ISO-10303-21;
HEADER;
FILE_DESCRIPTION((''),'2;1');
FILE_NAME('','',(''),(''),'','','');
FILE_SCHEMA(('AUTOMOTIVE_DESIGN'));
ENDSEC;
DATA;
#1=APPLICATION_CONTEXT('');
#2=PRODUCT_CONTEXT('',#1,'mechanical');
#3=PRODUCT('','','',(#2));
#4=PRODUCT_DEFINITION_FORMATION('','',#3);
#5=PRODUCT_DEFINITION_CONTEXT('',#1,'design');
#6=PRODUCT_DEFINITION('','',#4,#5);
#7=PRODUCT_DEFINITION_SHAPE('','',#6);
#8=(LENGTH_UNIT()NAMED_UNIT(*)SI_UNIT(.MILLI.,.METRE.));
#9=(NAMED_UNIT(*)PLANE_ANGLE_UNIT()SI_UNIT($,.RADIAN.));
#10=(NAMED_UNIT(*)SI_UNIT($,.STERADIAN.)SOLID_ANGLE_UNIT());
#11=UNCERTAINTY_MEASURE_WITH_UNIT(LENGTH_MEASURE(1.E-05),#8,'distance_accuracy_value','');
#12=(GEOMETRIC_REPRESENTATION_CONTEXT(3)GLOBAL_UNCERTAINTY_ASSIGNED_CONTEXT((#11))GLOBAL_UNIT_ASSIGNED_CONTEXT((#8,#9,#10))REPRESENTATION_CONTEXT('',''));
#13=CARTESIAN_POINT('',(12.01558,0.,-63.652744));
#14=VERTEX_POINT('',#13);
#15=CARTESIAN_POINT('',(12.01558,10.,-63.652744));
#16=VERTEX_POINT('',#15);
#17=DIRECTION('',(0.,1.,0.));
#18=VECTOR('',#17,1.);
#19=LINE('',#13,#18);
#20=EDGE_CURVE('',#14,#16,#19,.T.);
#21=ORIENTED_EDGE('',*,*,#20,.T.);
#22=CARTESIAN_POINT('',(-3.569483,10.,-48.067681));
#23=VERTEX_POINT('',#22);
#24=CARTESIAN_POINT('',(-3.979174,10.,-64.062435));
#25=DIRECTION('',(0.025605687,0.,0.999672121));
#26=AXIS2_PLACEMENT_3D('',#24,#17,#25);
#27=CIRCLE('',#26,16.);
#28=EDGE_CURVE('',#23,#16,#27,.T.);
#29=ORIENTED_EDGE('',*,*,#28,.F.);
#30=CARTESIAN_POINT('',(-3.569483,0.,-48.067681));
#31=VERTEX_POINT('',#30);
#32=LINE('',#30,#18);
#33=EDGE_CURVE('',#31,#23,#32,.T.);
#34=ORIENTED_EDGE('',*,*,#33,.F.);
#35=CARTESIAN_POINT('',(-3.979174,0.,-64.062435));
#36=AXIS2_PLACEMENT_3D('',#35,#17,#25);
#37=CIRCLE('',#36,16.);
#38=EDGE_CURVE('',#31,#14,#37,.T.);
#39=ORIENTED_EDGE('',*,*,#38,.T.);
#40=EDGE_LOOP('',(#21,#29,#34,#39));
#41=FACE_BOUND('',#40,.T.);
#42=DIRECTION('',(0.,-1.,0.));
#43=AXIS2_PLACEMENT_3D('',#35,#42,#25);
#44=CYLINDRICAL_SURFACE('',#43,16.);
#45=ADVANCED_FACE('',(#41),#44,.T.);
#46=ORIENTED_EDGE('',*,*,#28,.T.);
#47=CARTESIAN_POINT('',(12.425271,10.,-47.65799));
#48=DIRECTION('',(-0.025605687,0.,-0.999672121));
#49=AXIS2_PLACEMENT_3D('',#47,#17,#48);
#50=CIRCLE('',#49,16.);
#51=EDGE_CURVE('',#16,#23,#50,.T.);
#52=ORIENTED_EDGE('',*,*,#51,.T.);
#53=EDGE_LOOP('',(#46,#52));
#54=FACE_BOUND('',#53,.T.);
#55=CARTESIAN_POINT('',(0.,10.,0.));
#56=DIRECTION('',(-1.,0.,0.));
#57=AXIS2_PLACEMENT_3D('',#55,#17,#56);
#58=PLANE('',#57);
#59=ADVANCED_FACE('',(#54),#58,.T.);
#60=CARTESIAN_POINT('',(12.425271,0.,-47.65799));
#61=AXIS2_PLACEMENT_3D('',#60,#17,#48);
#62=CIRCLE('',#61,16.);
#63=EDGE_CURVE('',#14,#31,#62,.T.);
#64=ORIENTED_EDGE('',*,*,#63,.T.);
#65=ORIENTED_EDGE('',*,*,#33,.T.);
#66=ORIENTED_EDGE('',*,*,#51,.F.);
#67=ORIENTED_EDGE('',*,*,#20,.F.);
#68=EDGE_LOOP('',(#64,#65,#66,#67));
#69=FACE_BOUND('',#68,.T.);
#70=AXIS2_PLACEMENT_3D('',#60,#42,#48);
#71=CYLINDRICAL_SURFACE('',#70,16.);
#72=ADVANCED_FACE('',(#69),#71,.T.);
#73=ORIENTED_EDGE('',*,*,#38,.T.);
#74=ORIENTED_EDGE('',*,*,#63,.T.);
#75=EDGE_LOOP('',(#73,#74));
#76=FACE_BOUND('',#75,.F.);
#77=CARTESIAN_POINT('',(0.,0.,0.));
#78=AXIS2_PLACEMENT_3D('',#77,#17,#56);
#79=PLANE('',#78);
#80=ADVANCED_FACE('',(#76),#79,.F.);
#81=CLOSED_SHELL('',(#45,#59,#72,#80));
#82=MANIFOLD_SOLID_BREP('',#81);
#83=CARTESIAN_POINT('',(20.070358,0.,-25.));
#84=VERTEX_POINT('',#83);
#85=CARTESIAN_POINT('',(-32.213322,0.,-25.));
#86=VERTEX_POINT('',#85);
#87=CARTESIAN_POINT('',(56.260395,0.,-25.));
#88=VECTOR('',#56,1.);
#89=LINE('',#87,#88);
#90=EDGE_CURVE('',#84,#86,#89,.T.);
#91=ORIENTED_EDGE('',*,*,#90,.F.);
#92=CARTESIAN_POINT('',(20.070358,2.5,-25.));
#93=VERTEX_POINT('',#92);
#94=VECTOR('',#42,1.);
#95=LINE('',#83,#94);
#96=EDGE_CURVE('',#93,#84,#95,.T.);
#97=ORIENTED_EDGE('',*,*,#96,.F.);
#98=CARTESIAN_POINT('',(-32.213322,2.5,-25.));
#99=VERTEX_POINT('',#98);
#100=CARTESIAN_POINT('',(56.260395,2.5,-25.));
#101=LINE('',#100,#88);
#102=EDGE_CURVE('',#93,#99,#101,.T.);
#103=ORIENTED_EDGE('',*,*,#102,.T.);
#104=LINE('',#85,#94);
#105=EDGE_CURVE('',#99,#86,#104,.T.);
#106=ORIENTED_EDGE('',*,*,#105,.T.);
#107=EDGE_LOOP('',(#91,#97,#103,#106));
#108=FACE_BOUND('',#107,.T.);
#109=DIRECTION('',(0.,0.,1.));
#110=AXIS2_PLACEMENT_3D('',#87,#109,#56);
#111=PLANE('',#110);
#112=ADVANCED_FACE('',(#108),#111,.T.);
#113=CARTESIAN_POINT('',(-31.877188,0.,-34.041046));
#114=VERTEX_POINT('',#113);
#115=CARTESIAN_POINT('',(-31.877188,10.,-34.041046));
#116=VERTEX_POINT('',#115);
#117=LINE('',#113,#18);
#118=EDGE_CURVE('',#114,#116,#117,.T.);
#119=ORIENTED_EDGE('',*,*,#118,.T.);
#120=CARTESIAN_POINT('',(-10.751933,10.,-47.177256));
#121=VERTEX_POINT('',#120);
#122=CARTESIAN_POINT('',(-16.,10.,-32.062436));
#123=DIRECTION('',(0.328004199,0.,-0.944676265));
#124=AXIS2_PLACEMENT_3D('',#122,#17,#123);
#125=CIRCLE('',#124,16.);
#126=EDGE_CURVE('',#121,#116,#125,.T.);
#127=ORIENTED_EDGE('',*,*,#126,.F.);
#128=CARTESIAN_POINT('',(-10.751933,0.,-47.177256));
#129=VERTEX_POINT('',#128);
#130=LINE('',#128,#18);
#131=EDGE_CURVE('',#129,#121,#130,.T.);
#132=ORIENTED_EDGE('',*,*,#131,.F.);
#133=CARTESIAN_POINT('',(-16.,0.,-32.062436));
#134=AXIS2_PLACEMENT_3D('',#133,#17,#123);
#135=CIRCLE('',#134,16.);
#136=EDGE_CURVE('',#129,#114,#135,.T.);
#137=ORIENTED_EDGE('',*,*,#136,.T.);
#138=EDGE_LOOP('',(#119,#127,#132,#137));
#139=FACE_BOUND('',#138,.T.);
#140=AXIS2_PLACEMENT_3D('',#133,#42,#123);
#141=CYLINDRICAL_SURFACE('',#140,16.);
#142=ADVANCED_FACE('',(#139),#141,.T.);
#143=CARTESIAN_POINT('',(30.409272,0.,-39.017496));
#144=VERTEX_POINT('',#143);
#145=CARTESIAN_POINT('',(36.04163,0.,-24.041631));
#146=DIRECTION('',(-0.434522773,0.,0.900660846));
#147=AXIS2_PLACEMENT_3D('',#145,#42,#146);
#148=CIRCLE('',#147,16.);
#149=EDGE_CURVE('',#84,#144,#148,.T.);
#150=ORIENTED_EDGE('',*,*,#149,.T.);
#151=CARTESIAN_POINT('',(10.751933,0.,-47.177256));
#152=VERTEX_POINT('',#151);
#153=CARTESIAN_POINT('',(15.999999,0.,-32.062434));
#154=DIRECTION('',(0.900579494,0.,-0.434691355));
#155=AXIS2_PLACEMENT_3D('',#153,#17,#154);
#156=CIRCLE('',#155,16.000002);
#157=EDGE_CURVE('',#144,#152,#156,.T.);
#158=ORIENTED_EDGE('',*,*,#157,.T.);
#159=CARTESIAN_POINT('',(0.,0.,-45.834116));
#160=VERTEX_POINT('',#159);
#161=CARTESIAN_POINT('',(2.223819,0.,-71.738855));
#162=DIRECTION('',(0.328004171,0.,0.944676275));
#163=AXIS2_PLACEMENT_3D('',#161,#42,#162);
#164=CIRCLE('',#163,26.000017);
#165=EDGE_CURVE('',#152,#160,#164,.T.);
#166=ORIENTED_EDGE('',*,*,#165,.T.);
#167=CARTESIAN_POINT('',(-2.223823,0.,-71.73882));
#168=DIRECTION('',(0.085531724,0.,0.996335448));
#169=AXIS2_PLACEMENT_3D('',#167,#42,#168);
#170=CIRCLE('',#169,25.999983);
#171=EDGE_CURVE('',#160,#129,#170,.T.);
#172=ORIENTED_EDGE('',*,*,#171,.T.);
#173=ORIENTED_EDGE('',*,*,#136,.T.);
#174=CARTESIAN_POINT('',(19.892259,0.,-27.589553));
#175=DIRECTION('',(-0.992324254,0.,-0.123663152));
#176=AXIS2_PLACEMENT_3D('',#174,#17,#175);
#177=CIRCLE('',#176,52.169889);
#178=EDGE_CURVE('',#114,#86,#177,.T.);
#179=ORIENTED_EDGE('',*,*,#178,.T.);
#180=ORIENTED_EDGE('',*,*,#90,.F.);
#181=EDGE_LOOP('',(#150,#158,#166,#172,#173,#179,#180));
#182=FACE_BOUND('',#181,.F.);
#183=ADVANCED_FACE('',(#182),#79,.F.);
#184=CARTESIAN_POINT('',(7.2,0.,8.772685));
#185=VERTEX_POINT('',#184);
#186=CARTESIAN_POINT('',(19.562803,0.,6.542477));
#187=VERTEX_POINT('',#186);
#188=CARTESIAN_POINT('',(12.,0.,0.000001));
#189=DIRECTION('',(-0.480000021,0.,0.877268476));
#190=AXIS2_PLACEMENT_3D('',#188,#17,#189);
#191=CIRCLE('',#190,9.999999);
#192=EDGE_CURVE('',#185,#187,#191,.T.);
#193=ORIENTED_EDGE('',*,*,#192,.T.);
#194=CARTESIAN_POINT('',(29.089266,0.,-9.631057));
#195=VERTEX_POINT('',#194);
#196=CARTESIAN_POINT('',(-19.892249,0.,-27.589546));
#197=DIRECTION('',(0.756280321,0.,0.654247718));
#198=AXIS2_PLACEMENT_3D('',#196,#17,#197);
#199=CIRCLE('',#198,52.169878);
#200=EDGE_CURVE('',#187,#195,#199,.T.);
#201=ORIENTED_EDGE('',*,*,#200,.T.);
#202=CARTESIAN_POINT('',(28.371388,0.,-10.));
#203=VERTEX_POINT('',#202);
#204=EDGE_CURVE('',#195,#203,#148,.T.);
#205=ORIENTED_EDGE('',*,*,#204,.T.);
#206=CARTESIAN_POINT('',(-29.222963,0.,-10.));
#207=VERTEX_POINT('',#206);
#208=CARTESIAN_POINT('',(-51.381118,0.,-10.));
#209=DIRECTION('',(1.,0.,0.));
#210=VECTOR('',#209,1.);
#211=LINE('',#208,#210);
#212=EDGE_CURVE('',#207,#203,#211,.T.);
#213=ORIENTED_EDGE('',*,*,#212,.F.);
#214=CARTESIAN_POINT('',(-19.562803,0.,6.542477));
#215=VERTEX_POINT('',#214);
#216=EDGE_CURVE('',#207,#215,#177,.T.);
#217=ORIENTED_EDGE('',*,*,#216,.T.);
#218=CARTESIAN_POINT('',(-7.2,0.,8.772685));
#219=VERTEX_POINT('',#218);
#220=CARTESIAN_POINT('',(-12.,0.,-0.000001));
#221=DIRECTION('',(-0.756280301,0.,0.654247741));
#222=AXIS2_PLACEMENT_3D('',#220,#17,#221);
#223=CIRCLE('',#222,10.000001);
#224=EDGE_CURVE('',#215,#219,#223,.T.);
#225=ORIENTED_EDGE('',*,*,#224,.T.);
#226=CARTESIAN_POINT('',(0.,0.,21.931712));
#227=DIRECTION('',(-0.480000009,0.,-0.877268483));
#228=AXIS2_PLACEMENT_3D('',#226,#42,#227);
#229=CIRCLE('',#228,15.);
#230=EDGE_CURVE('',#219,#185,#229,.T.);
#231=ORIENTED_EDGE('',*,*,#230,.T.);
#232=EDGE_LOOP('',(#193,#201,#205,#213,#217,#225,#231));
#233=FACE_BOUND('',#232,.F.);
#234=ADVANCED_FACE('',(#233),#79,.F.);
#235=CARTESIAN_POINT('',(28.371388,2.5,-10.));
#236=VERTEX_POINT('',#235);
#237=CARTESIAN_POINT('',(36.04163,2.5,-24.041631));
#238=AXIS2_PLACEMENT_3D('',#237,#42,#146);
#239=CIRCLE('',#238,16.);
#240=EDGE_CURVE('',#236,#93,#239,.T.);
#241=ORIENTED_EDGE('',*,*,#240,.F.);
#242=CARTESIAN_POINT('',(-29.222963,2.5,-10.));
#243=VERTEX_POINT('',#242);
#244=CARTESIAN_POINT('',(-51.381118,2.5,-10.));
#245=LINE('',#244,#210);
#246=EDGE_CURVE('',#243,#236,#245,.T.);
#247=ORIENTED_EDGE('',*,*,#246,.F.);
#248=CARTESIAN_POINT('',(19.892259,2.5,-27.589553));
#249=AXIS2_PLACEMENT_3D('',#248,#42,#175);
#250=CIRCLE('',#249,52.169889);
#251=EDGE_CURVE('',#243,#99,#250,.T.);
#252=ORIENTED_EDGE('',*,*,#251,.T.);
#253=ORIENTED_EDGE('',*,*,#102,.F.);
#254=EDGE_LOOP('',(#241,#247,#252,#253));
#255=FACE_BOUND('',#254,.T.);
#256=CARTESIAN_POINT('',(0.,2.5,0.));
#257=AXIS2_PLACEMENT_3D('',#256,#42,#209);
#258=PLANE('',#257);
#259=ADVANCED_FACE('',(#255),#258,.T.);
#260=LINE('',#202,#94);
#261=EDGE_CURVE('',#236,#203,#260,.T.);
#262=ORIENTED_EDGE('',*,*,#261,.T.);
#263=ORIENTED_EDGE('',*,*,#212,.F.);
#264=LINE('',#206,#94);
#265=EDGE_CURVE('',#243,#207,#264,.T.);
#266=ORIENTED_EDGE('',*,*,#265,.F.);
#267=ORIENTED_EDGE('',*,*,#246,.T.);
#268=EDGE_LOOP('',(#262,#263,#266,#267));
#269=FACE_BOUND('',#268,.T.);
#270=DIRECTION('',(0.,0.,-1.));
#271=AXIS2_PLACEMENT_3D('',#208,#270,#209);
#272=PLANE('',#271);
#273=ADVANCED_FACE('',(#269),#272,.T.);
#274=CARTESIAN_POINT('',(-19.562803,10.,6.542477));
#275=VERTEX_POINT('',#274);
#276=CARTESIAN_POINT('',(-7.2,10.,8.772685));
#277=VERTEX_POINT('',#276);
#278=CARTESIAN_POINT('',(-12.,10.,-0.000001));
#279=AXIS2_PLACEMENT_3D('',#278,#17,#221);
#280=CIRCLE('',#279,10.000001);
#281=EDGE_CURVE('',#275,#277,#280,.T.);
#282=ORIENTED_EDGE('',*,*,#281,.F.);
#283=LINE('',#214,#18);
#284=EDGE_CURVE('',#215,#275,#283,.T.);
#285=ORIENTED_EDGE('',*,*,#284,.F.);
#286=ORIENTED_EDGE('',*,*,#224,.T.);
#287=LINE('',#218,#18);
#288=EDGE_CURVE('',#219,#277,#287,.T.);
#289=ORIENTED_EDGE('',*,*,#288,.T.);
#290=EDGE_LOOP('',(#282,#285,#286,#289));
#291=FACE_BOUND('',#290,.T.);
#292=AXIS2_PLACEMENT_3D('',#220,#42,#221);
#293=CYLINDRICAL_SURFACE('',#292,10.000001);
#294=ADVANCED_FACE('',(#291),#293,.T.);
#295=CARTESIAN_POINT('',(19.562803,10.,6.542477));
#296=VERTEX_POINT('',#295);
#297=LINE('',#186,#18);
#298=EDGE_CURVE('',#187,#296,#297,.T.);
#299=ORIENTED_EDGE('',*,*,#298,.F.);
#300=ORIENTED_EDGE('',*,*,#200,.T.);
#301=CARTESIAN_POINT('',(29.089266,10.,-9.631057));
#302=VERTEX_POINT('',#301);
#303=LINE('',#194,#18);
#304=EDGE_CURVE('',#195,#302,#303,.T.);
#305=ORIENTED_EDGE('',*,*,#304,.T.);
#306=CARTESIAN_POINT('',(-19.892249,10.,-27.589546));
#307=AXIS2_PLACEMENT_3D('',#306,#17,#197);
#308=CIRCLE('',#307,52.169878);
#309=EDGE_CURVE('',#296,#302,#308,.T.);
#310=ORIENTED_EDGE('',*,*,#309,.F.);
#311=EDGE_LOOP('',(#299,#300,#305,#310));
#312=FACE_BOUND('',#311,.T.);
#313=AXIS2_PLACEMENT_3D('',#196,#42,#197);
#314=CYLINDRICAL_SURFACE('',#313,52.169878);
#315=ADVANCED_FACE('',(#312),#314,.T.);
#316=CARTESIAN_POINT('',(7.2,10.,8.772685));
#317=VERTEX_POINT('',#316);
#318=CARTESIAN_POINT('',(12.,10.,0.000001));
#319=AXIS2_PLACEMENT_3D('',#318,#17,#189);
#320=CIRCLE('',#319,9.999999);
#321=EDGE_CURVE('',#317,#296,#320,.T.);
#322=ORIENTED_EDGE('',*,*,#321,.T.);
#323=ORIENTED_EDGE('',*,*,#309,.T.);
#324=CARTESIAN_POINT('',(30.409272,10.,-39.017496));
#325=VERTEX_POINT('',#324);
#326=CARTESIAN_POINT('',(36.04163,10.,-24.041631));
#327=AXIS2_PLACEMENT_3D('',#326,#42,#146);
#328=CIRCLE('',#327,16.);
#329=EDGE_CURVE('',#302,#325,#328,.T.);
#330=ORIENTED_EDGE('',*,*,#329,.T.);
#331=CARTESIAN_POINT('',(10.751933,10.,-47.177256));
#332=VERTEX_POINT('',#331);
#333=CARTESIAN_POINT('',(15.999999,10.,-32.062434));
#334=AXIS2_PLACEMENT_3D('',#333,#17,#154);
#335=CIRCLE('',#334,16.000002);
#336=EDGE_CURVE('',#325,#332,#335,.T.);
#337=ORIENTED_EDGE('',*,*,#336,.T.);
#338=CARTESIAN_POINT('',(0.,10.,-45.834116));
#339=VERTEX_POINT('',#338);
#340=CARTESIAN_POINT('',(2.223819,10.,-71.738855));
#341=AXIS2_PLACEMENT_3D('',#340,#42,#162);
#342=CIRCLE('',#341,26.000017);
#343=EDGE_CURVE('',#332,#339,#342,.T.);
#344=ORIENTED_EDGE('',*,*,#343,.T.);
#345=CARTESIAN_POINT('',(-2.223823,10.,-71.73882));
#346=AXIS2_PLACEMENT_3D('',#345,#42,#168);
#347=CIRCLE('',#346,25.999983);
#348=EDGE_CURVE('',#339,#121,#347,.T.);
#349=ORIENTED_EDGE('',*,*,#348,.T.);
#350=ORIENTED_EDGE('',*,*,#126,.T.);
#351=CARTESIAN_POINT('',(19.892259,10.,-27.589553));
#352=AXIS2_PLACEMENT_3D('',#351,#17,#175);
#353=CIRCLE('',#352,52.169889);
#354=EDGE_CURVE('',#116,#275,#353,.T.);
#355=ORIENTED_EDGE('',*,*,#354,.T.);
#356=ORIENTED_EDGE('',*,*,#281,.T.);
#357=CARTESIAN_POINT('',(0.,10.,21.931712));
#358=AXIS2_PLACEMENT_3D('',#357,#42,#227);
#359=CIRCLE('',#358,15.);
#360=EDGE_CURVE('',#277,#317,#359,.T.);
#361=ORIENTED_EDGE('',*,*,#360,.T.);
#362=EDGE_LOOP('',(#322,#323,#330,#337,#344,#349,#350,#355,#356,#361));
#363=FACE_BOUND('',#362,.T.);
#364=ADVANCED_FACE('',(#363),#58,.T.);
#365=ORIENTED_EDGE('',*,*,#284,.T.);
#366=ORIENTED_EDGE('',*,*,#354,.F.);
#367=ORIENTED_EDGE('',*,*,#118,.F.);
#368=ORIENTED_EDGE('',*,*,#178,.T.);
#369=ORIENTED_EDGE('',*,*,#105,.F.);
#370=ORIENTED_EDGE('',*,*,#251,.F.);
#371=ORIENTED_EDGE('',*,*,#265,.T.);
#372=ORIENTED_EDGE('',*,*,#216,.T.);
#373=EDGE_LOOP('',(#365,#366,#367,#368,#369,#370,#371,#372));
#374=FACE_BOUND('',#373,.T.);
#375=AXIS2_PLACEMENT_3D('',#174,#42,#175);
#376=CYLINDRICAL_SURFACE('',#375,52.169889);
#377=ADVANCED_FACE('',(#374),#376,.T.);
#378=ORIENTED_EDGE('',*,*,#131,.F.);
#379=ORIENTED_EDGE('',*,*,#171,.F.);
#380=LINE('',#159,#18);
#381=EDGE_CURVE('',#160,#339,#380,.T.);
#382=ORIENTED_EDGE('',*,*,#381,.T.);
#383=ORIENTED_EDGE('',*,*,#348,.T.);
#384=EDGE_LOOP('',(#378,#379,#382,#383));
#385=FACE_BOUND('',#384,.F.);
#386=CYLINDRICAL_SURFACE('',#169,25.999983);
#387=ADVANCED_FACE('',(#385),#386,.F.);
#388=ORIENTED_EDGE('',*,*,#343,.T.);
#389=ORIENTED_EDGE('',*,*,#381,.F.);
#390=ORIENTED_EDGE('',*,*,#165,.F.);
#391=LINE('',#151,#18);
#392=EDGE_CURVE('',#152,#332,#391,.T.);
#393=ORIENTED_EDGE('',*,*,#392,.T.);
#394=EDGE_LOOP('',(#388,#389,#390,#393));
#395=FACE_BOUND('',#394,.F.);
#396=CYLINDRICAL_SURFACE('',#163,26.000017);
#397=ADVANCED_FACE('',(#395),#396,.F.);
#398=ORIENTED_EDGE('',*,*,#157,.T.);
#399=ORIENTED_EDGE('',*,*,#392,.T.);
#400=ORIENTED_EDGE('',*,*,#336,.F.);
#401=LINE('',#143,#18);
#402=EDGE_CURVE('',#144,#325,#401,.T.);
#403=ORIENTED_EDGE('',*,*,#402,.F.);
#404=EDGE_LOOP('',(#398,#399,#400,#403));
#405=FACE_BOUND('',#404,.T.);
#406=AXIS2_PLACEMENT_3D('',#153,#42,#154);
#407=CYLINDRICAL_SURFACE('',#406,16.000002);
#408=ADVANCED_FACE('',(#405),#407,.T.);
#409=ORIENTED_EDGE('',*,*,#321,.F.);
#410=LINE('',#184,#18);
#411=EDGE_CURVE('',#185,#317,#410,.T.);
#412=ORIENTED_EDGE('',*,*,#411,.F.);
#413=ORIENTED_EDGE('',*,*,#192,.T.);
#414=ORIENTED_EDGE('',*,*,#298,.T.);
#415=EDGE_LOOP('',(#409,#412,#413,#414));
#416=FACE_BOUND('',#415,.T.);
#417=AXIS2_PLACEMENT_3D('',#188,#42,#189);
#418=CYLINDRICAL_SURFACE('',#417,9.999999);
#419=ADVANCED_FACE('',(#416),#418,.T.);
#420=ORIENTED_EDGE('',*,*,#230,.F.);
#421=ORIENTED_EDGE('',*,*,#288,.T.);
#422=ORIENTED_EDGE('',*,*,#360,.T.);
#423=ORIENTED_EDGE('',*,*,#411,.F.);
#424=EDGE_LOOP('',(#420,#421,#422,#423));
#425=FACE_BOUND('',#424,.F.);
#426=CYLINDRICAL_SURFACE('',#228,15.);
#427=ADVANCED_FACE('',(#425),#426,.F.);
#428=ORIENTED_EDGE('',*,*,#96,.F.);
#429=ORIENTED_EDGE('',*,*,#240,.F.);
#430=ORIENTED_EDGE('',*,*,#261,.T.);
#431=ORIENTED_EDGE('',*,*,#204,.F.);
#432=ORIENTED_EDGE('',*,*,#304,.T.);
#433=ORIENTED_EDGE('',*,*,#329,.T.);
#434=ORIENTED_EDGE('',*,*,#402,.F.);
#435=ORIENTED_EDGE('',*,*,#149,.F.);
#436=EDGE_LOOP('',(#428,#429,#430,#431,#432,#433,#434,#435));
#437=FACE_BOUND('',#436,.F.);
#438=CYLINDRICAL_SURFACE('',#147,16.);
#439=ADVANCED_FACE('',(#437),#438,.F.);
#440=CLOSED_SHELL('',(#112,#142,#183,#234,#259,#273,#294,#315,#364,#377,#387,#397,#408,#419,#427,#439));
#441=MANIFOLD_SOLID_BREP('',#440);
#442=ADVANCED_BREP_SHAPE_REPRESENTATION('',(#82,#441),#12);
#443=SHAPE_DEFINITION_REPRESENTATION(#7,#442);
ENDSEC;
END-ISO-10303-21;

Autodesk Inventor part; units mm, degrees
ref_plane "YZ Plane" through (0, 0, 0) normal (1, 0, 0) x (0, 1, 0)
ref_plane "XZ Plane" through (0, 0, 0) normal (0, 1, 0) x (-1, 0, 0)
ref_plane "XY Plane" through (0, 0, 0) normal (0, 0, 1) x (1, 0, 0)
sketch "Sketch2" plane through (0, 0, 0) normal (0, 1, 0) x (-1, 0, 0)
  line L0 (0, 0) -> (-15.380673, 0) construction
  line L1 (0, 12) -> (0, -86.646063) construction
  circle A0 centre (0, 0) radius 2
  circle A1 centre (-12, 0) radius 10
  circle A2 centre (-23.313708, -11.313708) radius 6
  circle A3 centre (-16, -32.062435) radius 16
  line L2 (-16, -48.062435) -> (0, -48.062435)
  line L3 (-12, 10) -> (0, 10)
  line L4 (-12, 0) -> (-23.313708, -11.313708)
  arc A4 (-19.562803, 6.542477) -> (-31.877188, -34.041046) centre (19.892258, -27.589553) ccw
  line L5 (0, 0) -> (15.380673, 0) construction
  circle A5 centre (0, 0) radius 2
  circle A6 centre (12, 0) radius 10
  circle A7 centre (23.313708, -11.313708) radius 6
  circle A8 centre (16, -32.062435) radius 16
  line L6 (16, -48.062435) -> (0, -48.062435)
  line L7 (12, 10) -> (0, 10)
  line L8 (12, 0) -> (23.313708, -11.313708)
  arc A9 (31.877188, -34.041046) -> (19.562803, 6.542477) centre (-19.892258, -27.589553) ccw
  arc A10 (10.751933, -47.177256) -> (0, -45.834116) centre (2.223823, -71.738838) ccw
  arc A11 (0, 6.931712) -> (7.2, 8.772685) centre (0, 21.931712) ccw
  arc A12 (0, -45.834116) -> (-10.751933, -47.177256) centre (-2.223823, -71.738838) ccw
  arc A13 (-7.2, 8.772685) -> (0, 6.931712) centre (0, 21.931712) ccw
  line L9 (-23.313708, -11.313708) -> (-58.366086, -46.366086)
  line L10 (-12, 0) -> (-38.351414, 26.351414)
  line L11 (10.154637, -70.237898) -> (-38.67512, -21.408141)
  circle A14 centre (-36.041631, -24.041631) radius 16
  circle A15 centre (-12.425271, -47.65799) radius 16
  circle A16 centre (3.979174, -64.062435) radius 16
  point P0 (3.569483, -48.067681)
  point P1 (-12.01558, -63.652744)
  point P2 (-7.2, 8.772685)
  point P3 (-29.089266, -9.631057)
  point P4 (-30.409272, -39.017496)
  point P5 (-10.751933, -47.177256)
  dimension "d0" = 4
  dimension "d1" = 20
  dimension "d2" = 12
  dimension "d3" = 32
  dimension "d4" = 135
  dimension "d6" = 26
  dimension "d7" = 15
  dimension "d8" = 90
  dimension "d12" = 34
  dimension "d13" = 32
  dimension "d14" = 32
  dimension "d15" = 32
sketch "Sketch2 outline for Extrusion1" plane through (0, 0, 0) normal (0, 1, 0) x (-1, 0, 0)
  arc A0 (3.569483, -48.067681) -> (-12.01558, -63.652744) centre (3.979174, -64.062435) ccw
  arc A1 (-12.01558, -63.652744) -> (3.569483, -48.067681) centre (-12.425271, -47.65799) ccw
  arc A2 (31.877188, -34.041046) -> (19.562803, 6.542477) centre (-19.892258, -27.589553) ccw
  arc A3 (19.562803, 6.542477) -> (7.2, 8.772685) centre (12, 0) ccw
  arc A4 (7.2, 8.772685) -> (-7.2, 8.772685) centre (0, 21.931712) cw
  arc A5 (-7.2, 8.772685) -> (-19.562803, 6.542477) centre (-12, 0) ccw
  arc A6 (-19.562803, 6.542477) -> (-29.089266, -9.631057) centre (19.892258, -27.589553) ccw
  arc A7 (-29.089266, -9.631057) -> (-30.409272, -39.017496) centre (-36.041631, -24.041631) cw
  arc A8 (-30.409272, -39.017496) -> (-10.751933, -47.177256) centre (-16, -32.062435) ccw
  arc A9 (-10.751933, -47.177256) -> (0, -45.834116) centre (-2.223823, -71.738838) cw
  arc A10 (0, -45.834116) -> (10.751933, -47.177256) centre (2.223823, -71.738838) cw
  arc A11 (10.751933, -47.177256) -> (31.877188, -34.041046) centre (16, -32.062435) ccw
extrude "Extrusion1" add sketch "Sketch2 outline for Extrusion1" along normal blind 10
sketch "Sketch3" plane through (0, 0, 0) normal (0, -1, 0) x (1, 0, 0)
  line L0 (-51.381118, -10) -> (56.260395, -10)
  line L1 (56.260395, -10) -> (56.260395, -25)
  line L2 (56.260395, -25) -> (-51.381118, -25)
  line L3 (-51.381118, -25) -> (-51.381118, -10)
  point P0 (0, 0)
  dimension "d22" = 15
  dimension "d23" = 10
extrude "Extrusion2" cut sketch "Sketch3" against normal blind 2.5
properties part number "Apple_logo_white"
